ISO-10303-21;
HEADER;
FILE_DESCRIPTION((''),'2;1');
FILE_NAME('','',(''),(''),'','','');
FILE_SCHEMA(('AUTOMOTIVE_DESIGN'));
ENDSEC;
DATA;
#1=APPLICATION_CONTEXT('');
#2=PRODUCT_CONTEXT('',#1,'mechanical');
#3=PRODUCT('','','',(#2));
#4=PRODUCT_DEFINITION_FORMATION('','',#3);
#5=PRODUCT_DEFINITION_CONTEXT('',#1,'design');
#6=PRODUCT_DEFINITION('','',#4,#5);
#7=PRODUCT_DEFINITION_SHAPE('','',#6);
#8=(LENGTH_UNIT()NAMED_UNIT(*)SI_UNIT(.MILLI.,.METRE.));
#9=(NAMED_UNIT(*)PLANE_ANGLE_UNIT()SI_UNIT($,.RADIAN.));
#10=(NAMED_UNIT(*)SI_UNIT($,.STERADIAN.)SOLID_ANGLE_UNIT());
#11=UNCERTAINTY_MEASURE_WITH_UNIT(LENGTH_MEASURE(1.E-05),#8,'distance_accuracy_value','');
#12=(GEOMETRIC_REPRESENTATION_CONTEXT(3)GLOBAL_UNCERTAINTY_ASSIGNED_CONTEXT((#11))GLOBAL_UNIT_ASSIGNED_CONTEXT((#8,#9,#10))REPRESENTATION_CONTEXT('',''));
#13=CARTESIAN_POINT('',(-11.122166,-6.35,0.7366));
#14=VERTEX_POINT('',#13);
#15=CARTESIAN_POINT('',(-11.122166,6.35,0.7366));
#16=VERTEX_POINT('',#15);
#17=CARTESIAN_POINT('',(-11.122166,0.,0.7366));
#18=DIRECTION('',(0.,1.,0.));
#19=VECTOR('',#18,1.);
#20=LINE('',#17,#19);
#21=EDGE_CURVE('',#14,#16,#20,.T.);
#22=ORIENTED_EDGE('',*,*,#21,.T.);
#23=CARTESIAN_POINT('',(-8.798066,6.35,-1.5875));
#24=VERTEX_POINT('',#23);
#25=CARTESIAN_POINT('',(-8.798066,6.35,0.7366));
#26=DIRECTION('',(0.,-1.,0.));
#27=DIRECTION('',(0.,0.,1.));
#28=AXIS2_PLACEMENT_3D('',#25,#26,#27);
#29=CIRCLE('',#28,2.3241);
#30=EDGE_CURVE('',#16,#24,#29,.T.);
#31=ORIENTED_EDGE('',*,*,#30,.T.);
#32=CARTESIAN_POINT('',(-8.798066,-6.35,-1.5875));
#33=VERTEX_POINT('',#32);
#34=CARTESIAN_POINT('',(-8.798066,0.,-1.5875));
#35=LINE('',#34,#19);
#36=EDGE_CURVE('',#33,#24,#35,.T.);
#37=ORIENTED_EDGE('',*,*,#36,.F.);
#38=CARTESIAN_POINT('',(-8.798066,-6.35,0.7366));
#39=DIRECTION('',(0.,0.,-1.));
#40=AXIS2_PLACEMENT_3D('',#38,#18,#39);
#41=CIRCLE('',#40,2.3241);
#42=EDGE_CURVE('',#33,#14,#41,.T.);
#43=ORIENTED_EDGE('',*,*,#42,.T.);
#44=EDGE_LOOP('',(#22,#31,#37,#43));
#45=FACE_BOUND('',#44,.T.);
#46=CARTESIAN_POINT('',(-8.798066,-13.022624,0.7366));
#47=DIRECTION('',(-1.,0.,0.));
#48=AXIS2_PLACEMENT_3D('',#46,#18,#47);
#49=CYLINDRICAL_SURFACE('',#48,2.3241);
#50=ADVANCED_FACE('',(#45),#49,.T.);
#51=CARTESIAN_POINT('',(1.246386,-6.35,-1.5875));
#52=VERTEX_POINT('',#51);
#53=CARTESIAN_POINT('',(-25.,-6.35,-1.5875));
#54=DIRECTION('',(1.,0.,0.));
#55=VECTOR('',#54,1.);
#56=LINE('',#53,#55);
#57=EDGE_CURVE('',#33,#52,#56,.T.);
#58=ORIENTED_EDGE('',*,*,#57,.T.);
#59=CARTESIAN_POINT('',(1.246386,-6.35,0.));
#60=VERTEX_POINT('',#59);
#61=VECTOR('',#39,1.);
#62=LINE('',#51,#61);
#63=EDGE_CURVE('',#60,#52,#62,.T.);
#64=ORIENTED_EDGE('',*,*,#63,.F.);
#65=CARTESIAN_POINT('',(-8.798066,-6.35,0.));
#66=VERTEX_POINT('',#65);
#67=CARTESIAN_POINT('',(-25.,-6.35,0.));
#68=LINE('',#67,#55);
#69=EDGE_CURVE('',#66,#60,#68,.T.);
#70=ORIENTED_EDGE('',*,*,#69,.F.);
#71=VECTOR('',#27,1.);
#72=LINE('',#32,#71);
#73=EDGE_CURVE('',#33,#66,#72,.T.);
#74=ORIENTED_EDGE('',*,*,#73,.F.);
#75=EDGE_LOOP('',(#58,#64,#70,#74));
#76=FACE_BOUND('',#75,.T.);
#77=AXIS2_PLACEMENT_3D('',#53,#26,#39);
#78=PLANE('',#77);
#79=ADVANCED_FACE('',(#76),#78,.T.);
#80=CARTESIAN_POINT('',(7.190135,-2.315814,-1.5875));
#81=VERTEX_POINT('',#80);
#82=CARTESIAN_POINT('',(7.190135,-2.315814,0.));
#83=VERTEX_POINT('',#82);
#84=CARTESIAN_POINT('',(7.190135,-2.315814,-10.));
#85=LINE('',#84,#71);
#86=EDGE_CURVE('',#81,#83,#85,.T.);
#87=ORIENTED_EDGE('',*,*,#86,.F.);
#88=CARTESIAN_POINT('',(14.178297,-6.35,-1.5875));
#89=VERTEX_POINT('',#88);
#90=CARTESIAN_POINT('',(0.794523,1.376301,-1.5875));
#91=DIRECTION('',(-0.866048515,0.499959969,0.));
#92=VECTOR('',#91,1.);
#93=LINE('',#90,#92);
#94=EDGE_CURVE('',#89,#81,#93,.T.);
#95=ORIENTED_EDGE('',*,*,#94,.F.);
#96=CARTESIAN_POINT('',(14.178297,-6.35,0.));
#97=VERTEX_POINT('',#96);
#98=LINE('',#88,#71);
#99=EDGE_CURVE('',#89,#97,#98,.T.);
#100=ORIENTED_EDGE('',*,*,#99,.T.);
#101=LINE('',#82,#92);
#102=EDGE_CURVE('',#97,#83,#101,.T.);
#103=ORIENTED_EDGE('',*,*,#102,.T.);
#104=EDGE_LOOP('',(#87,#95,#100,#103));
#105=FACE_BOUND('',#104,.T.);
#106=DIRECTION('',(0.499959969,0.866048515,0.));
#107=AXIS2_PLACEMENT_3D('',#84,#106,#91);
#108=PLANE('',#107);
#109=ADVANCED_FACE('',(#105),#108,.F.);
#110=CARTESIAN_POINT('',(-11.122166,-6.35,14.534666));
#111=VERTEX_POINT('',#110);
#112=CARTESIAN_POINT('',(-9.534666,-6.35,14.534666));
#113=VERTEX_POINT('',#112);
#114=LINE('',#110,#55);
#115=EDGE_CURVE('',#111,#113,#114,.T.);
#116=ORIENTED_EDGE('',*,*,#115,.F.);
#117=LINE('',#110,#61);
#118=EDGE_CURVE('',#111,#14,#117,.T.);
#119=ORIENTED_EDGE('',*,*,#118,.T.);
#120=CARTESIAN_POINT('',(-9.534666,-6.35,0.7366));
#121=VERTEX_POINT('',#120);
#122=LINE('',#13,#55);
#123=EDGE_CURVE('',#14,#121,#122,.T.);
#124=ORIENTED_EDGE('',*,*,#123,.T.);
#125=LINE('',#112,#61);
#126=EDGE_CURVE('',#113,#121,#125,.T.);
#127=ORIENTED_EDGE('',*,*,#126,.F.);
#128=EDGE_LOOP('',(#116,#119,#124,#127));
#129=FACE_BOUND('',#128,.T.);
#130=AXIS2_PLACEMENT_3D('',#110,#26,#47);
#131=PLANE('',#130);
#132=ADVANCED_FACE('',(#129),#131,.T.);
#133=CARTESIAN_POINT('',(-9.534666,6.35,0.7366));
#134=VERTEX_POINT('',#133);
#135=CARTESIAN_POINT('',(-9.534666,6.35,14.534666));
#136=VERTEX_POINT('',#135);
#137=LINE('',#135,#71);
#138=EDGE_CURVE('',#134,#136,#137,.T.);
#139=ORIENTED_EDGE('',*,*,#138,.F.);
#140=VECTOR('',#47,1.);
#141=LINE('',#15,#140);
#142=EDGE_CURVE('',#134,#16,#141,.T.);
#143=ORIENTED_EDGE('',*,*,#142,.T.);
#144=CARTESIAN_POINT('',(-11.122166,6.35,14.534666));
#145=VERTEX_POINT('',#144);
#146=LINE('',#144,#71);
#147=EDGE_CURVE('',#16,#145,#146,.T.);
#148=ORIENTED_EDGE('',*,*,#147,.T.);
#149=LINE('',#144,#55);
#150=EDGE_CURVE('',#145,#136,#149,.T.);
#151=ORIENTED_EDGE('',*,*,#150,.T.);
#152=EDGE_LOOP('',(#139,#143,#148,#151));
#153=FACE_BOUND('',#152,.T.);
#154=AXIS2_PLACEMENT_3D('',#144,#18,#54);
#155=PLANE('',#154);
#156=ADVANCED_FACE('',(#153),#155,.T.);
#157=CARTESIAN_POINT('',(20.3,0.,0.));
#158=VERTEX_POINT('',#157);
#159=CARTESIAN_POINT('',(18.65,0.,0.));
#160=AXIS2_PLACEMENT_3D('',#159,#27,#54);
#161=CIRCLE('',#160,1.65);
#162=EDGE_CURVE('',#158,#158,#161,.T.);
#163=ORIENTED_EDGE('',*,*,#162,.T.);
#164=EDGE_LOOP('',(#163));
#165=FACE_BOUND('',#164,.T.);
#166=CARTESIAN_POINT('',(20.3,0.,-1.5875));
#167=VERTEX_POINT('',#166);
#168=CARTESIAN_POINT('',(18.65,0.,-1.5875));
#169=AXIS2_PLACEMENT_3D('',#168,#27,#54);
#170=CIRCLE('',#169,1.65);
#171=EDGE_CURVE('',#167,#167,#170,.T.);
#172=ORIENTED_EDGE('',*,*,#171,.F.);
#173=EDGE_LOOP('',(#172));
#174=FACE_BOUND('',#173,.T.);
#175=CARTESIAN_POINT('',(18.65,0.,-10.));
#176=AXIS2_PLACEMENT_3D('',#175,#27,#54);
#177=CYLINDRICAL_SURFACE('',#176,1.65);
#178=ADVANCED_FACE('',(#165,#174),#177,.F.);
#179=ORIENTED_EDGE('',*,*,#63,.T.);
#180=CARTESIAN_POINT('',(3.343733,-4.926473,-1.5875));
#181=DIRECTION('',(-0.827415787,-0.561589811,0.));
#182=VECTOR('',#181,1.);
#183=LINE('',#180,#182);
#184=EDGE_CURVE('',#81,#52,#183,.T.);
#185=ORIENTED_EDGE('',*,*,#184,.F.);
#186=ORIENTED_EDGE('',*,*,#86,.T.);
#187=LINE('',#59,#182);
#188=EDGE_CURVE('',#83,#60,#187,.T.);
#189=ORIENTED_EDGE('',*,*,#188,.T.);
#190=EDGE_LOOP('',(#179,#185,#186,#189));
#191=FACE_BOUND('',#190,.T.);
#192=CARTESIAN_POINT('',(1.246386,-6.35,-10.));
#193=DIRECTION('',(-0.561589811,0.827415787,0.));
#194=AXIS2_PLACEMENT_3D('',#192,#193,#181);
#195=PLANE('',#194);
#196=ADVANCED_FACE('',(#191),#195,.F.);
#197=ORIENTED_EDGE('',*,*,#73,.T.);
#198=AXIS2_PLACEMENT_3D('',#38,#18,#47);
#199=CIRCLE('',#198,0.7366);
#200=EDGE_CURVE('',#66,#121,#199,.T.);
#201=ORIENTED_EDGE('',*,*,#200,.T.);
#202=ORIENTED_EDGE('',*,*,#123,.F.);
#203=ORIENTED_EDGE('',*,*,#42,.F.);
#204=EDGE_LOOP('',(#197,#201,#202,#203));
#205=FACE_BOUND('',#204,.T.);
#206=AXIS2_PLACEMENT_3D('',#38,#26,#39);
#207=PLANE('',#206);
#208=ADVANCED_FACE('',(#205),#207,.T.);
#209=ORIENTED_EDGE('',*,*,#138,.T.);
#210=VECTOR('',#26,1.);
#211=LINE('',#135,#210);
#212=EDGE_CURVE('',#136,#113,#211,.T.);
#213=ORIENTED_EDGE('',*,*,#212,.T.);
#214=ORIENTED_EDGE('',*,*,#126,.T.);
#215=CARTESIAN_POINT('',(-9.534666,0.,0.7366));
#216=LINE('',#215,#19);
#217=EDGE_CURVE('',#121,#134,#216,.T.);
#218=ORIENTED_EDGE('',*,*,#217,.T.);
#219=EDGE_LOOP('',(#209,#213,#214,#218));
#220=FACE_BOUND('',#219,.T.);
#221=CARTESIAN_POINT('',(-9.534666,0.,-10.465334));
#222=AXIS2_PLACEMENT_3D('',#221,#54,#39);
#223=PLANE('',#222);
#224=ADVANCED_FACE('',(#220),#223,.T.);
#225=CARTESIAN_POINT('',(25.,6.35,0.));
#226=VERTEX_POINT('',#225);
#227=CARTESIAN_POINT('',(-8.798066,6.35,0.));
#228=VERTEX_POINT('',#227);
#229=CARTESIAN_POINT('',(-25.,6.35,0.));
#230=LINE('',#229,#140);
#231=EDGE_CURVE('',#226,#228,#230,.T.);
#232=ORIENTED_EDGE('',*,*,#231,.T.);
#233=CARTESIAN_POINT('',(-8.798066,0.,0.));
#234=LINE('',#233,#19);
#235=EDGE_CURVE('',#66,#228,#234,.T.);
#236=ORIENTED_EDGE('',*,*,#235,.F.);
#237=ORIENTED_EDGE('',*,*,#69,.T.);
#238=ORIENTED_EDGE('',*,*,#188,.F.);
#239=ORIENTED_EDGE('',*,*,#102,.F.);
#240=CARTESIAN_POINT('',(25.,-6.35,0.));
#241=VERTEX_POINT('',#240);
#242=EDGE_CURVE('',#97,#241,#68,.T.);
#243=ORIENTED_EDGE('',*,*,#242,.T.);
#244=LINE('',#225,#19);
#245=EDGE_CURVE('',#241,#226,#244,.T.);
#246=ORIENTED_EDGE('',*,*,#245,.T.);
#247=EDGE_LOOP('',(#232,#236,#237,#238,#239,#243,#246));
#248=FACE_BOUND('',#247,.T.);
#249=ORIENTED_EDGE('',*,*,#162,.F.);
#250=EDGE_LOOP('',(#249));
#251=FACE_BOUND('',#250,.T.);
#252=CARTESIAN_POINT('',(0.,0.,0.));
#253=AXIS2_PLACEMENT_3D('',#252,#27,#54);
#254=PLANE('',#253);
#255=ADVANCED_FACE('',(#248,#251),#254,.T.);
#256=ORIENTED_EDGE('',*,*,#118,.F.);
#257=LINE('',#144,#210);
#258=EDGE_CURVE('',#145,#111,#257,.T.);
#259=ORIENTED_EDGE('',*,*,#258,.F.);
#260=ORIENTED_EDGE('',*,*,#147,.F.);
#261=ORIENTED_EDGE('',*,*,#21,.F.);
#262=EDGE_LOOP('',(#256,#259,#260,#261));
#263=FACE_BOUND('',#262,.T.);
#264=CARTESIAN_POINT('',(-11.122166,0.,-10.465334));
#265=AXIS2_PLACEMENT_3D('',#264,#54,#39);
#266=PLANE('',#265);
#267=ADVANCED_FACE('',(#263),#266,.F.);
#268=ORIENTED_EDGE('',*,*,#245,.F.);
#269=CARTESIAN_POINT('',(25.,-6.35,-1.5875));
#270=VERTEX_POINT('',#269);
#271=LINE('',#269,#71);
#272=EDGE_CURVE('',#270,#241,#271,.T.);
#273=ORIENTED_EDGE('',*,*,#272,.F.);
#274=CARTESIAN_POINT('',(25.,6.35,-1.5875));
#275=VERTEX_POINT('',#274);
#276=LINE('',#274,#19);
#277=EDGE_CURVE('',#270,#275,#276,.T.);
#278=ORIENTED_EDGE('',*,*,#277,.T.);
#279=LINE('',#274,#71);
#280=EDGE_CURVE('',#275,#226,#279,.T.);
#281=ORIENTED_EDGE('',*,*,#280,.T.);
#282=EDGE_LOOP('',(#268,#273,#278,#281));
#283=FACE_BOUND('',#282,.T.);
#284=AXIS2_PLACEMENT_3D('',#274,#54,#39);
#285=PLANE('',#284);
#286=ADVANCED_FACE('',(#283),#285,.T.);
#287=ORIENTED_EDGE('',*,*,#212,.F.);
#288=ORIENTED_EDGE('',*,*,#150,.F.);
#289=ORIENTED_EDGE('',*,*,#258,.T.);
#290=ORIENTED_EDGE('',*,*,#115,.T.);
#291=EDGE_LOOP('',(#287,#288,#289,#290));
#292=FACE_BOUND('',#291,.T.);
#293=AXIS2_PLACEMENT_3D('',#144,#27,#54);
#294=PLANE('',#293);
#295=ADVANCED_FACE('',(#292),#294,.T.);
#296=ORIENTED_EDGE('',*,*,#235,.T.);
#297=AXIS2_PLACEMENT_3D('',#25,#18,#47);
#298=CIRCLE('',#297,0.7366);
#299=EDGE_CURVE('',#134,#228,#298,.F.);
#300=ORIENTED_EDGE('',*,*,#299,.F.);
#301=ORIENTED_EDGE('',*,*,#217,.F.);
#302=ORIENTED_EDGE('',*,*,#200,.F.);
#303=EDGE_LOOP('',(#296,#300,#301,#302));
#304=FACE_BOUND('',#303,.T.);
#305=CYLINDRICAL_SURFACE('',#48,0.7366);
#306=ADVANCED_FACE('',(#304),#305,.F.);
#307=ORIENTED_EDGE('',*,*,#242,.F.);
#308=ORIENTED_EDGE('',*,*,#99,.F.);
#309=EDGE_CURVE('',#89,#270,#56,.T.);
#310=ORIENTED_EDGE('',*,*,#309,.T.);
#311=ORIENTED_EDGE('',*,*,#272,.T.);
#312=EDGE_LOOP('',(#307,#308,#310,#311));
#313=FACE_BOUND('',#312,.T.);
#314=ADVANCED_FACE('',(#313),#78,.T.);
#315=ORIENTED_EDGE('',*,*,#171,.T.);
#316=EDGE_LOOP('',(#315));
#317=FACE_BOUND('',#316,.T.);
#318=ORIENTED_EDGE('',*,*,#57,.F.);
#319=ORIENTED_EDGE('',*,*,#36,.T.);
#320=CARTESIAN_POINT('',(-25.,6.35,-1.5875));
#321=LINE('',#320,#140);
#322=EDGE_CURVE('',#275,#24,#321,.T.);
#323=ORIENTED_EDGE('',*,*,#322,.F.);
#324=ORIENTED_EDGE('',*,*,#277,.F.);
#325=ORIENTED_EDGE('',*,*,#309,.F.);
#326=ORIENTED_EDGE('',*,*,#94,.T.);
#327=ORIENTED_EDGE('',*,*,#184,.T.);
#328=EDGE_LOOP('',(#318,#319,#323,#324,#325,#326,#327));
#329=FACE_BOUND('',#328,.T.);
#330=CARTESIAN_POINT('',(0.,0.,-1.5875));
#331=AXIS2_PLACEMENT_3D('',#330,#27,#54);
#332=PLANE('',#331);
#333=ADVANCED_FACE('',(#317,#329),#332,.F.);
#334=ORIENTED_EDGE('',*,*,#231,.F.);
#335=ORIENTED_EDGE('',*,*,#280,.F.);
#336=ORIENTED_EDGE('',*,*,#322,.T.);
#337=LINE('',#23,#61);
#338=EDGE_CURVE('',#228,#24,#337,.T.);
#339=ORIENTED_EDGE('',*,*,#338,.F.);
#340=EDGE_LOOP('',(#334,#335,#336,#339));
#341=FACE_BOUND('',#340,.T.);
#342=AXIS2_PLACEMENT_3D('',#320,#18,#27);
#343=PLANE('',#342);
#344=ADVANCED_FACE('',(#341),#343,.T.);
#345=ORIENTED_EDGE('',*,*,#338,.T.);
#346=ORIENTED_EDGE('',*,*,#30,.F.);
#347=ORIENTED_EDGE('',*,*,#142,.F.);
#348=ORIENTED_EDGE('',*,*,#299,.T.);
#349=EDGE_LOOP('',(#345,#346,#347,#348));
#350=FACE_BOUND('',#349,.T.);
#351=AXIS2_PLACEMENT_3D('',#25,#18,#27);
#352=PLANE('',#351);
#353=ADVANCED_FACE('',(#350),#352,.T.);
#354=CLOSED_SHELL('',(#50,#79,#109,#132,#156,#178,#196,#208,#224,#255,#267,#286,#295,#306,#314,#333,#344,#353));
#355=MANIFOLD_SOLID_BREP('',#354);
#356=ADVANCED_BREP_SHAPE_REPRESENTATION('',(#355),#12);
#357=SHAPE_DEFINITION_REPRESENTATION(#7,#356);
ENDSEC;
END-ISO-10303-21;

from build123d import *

# Parameters (mm, degrees)
ESBO_O1_W               = 50
ESBO_O1_H               = 12.7
FLANGE_BASE1_DEPTH      = 1.5875
DOBRA_START             = -6.35
DOBRA_ESBO_ADA1_DEPTH   = 12.7
DOBRA_ESBO_ADA1_2_DEPTH = 12.7
CORTE_EXTRUS_O1_DEPTH   = 10
ESBO_O8_R               = 1.65
CORTE_EXTRUS_O2_DEPTH   = 10


# Read off the part's stored shape, not the designer's step: Dobra esboçada1
# Sheet-metal steps are written as plain solids
with BuildPart() as part:
    # Esboço1 → Flange-base1 (new body)
    with BuildSketch(Plane.XY):
        Rectangle(ESBO_O1_W, ESBO_O1_H)
    extrude(amount=-FLANGE_BASE1_DEPTH)

    # Dobra esboçada1 outline → Dobra esboçada1 (cut)
    with BuildSketch(Plane(origin=(0, 0, 0), x_dir=(1, 0, 0), z_dir=(0, 1, 0)).offset(DOBRA_START)):
        with BuildLine():
            Line((-25, 0), (-11.0023484, 0))
            ThreePointArc((-11.0023484, 0), (-10.156283273, 1.149317929), (-8.798065921, 1.5875))
            Line((-8.798065921, 1.5875), (-25, 1.5875))
            Line((-25, 1.5875), (-25, 0))
        make_face()
    extrude(amount=DOBRA_ESBO_ADA1_DEPTH, mode=Mode.SUBTRACT)

    # Dobra esbo_ada1 2 outline → Dobra esbo_ada1 2 (add)
    with BuildSketch(Plane(origin=(0, 0, 0), x_dir=(1, 0, 0), z_dir=(0, 1, 0)).offset(DOBRA_START)):
        with BuildLine():
            Line((-11.122165921, -14.534665921), (-9.534665921, -14.534665921))
            Line((-9.534665921, -14.534665921), (-9.534665921, -0.7366))
            ThreePointArc((-9.534665921, -0.7366), (-9.318920776, -0.215745145), (-8.798065921, 0))
            Line((-8.798065921, 0), (-11.0023484, 0))
            ThreePointArc((-11.0023484, 0), (-11.092015977, -0.363459343), (-11.122165921, -0.7366))
            Line((-11.122165921, -0.7366), (-11.122165921, -14.534665921))
        make_face()
    extrude(amount=DOBRA_ESBO_ADA1_2_DEPTH)

    # Esboço7 → Corte-extrusão1 (cut)
    with BuildSketch(Plane.XY):
        Polygon((1.246385816, -6.35), (7.190135396, -2.315813979), (14.178296509, -6.35), align=None)
    extrude(amount=-CORTE_EXTRUS_O1_DEPTH, mode=Mode.SUBTRACT)

    # Esboço8 → Corte-extrusão2 (cut)
    with BuildSketch(Plane.XY):
        with Locations((18.65, 0)):
            Circle(ESBO_O8_R)
    extrude(amount=-CORTE_EXTRUS_O2_DEPTH, mode=Mode.SUBTRACT)


solid = part.part
